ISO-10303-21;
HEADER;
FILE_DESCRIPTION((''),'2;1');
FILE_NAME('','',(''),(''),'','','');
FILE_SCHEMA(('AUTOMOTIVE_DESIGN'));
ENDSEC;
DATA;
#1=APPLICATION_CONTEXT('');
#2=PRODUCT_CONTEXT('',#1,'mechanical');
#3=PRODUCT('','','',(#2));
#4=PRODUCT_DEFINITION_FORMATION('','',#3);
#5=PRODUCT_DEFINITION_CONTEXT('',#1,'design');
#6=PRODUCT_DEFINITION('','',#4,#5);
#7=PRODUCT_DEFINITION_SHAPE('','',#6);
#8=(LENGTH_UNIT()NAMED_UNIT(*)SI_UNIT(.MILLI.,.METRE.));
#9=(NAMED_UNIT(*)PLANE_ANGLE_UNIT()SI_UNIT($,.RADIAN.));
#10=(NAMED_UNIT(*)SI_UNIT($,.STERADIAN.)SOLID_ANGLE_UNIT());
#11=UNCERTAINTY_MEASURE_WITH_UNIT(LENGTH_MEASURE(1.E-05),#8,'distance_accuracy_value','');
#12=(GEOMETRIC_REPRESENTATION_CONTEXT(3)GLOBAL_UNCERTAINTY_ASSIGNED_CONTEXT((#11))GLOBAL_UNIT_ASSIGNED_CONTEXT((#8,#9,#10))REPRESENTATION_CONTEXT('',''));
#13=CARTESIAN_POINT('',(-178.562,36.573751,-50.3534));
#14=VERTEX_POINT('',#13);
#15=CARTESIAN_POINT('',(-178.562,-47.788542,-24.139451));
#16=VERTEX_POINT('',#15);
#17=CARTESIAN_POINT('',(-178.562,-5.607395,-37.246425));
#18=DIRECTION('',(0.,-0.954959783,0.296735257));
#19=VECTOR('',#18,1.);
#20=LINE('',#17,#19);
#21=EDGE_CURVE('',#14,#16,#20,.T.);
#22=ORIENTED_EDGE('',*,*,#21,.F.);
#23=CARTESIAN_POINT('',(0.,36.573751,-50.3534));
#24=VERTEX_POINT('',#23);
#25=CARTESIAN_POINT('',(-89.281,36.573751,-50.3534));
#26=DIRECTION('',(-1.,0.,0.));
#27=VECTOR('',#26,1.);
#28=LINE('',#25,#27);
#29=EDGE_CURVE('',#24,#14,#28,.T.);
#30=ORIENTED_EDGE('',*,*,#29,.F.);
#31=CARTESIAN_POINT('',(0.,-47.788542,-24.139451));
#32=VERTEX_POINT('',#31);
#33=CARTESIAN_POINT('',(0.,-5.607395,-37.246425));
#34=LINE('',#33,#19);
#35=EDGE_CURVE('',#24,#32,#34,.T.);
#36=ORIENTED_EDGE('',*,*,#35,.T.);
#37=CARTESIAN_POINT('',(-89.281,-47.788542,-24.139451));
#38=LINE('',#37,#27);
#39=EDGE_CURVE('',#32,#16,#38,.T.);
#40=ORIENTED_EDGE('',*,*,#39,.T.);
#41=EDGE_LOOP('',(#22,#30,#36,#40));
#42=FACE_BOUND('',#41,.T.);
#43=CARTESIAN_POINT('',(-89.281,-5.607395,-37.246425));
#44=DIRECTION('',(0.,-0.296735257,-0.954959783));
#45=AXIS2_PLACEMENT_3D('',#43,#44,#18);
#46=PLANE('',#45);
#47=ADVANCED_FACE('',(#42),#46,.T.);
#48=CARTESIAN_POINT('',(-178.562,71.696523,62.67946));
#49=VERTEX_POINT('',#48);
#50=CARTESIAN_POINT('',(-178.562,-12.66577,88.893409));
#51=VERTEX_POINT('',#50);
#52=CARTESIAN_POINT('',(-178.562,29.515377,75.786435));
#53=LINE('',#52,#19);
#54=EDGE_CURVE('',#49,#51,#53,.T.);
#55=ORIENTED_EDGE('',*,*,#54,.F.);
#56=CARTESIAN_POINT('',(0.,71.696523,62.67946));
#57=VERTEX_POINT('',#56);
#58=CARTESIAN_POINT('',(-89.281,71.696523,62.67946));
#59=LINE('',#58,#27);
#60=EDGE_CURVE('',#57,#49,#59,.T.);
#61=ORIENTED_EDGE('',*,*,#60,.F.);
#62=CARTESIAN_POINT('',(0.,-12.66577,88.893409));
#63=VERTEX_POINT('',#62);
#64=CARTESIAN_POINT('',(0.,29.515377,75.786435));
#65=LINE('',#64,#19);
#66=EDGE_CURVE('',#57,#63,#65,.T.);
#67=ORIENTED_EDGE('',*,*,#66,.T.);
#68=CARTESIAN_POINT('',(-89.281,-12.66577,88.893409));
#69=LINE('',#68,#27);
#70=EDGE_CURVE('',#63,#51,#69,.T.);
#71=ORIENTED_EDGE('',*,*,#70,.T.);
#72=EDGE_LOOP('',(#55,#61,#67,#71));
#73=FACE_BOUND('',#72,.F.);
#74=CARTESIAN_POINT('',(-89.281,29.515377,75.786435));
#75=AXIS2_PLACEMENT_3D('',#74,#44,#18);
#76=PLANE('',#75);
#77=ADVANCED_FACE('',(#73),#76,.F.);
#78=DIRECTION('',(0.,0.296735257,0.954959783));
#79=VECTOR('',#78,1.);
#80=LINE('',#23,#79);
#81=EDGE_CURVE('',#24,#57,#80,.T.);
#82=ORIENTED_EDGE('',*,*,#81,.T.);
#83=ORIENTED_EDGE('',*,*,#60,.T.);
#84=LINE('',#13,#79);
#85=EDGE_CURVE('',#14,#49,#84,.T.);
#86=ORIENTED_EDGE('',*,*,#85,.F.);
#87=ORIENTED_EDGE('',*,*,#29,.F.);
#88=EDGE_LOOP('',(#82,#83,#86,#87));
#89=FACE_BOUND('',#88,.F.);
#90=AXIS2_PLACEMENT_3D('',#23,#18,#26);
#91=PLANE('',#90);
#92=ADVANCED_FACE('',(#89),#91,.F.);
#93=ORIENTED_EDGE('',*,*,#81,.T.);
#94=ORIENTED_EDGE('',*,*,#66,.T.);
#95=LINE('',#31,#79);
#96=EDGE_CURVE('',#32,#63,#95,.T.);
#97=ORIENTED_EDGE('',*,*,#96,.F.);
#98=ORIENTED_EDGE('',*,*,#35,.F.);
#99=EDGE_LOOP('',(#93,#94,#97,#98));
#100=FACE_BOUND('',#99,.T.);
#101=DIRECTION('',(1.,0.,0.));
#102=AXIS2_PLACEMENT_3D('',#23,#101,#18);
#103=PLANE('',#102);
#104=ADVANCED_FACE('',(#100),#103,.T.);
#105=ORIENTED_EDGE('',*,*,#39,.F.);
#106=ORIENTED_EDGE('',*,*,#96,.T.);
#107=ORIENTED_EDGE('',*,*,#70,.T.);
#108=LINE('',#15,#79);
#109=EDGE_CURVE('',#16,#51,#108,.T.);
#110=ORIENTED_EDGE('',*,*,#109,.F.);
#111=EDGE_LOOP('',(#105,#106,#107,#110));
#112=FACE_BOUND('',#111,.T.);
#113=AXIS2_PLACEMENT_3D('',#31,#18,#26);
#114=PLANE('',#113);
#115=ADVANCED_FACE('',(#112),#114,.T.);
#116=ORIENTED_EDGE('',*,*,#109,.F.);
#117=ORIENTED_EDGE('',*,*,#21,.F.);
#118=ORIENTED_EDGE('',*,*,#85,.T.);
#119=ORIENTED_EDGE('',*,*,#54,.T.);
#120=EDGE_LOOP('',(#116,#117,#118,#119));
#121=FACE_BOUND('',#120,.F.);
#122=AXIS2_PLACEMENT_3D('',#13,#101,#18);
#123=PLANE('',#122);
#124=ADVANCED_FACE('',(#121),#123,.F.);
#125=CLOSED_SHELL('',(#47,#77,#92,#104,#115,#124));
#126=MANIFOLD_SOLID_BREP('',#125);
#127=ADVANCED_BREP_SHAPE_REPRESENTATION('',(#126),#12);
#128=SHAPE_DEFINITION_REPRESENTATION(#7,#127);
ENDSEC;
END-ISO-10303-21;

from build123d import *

# Parameters (mm, degrees)
F1_E1_W  = 88.3412
F1_E1_H  = 178.562
F2_DEPTH = 118.364


with BuildPart() as f2:
    # F1_E1 (on explicit) → F2 (new body)
    with BuildSketch(Plane(origin=(0, 36.5737514276, -50.3533995333), x_dir=(0, -0.9549597831, 0.2967352568), z_dir=(0, -0.2967352568, -0.9549597831))):
        with Locations((44.1706, 89.281)):
            Rectangle(F1_E1_W, F1_E1_H)
    extrude(amount=-F2_DEPTH)


solid = f2.part
